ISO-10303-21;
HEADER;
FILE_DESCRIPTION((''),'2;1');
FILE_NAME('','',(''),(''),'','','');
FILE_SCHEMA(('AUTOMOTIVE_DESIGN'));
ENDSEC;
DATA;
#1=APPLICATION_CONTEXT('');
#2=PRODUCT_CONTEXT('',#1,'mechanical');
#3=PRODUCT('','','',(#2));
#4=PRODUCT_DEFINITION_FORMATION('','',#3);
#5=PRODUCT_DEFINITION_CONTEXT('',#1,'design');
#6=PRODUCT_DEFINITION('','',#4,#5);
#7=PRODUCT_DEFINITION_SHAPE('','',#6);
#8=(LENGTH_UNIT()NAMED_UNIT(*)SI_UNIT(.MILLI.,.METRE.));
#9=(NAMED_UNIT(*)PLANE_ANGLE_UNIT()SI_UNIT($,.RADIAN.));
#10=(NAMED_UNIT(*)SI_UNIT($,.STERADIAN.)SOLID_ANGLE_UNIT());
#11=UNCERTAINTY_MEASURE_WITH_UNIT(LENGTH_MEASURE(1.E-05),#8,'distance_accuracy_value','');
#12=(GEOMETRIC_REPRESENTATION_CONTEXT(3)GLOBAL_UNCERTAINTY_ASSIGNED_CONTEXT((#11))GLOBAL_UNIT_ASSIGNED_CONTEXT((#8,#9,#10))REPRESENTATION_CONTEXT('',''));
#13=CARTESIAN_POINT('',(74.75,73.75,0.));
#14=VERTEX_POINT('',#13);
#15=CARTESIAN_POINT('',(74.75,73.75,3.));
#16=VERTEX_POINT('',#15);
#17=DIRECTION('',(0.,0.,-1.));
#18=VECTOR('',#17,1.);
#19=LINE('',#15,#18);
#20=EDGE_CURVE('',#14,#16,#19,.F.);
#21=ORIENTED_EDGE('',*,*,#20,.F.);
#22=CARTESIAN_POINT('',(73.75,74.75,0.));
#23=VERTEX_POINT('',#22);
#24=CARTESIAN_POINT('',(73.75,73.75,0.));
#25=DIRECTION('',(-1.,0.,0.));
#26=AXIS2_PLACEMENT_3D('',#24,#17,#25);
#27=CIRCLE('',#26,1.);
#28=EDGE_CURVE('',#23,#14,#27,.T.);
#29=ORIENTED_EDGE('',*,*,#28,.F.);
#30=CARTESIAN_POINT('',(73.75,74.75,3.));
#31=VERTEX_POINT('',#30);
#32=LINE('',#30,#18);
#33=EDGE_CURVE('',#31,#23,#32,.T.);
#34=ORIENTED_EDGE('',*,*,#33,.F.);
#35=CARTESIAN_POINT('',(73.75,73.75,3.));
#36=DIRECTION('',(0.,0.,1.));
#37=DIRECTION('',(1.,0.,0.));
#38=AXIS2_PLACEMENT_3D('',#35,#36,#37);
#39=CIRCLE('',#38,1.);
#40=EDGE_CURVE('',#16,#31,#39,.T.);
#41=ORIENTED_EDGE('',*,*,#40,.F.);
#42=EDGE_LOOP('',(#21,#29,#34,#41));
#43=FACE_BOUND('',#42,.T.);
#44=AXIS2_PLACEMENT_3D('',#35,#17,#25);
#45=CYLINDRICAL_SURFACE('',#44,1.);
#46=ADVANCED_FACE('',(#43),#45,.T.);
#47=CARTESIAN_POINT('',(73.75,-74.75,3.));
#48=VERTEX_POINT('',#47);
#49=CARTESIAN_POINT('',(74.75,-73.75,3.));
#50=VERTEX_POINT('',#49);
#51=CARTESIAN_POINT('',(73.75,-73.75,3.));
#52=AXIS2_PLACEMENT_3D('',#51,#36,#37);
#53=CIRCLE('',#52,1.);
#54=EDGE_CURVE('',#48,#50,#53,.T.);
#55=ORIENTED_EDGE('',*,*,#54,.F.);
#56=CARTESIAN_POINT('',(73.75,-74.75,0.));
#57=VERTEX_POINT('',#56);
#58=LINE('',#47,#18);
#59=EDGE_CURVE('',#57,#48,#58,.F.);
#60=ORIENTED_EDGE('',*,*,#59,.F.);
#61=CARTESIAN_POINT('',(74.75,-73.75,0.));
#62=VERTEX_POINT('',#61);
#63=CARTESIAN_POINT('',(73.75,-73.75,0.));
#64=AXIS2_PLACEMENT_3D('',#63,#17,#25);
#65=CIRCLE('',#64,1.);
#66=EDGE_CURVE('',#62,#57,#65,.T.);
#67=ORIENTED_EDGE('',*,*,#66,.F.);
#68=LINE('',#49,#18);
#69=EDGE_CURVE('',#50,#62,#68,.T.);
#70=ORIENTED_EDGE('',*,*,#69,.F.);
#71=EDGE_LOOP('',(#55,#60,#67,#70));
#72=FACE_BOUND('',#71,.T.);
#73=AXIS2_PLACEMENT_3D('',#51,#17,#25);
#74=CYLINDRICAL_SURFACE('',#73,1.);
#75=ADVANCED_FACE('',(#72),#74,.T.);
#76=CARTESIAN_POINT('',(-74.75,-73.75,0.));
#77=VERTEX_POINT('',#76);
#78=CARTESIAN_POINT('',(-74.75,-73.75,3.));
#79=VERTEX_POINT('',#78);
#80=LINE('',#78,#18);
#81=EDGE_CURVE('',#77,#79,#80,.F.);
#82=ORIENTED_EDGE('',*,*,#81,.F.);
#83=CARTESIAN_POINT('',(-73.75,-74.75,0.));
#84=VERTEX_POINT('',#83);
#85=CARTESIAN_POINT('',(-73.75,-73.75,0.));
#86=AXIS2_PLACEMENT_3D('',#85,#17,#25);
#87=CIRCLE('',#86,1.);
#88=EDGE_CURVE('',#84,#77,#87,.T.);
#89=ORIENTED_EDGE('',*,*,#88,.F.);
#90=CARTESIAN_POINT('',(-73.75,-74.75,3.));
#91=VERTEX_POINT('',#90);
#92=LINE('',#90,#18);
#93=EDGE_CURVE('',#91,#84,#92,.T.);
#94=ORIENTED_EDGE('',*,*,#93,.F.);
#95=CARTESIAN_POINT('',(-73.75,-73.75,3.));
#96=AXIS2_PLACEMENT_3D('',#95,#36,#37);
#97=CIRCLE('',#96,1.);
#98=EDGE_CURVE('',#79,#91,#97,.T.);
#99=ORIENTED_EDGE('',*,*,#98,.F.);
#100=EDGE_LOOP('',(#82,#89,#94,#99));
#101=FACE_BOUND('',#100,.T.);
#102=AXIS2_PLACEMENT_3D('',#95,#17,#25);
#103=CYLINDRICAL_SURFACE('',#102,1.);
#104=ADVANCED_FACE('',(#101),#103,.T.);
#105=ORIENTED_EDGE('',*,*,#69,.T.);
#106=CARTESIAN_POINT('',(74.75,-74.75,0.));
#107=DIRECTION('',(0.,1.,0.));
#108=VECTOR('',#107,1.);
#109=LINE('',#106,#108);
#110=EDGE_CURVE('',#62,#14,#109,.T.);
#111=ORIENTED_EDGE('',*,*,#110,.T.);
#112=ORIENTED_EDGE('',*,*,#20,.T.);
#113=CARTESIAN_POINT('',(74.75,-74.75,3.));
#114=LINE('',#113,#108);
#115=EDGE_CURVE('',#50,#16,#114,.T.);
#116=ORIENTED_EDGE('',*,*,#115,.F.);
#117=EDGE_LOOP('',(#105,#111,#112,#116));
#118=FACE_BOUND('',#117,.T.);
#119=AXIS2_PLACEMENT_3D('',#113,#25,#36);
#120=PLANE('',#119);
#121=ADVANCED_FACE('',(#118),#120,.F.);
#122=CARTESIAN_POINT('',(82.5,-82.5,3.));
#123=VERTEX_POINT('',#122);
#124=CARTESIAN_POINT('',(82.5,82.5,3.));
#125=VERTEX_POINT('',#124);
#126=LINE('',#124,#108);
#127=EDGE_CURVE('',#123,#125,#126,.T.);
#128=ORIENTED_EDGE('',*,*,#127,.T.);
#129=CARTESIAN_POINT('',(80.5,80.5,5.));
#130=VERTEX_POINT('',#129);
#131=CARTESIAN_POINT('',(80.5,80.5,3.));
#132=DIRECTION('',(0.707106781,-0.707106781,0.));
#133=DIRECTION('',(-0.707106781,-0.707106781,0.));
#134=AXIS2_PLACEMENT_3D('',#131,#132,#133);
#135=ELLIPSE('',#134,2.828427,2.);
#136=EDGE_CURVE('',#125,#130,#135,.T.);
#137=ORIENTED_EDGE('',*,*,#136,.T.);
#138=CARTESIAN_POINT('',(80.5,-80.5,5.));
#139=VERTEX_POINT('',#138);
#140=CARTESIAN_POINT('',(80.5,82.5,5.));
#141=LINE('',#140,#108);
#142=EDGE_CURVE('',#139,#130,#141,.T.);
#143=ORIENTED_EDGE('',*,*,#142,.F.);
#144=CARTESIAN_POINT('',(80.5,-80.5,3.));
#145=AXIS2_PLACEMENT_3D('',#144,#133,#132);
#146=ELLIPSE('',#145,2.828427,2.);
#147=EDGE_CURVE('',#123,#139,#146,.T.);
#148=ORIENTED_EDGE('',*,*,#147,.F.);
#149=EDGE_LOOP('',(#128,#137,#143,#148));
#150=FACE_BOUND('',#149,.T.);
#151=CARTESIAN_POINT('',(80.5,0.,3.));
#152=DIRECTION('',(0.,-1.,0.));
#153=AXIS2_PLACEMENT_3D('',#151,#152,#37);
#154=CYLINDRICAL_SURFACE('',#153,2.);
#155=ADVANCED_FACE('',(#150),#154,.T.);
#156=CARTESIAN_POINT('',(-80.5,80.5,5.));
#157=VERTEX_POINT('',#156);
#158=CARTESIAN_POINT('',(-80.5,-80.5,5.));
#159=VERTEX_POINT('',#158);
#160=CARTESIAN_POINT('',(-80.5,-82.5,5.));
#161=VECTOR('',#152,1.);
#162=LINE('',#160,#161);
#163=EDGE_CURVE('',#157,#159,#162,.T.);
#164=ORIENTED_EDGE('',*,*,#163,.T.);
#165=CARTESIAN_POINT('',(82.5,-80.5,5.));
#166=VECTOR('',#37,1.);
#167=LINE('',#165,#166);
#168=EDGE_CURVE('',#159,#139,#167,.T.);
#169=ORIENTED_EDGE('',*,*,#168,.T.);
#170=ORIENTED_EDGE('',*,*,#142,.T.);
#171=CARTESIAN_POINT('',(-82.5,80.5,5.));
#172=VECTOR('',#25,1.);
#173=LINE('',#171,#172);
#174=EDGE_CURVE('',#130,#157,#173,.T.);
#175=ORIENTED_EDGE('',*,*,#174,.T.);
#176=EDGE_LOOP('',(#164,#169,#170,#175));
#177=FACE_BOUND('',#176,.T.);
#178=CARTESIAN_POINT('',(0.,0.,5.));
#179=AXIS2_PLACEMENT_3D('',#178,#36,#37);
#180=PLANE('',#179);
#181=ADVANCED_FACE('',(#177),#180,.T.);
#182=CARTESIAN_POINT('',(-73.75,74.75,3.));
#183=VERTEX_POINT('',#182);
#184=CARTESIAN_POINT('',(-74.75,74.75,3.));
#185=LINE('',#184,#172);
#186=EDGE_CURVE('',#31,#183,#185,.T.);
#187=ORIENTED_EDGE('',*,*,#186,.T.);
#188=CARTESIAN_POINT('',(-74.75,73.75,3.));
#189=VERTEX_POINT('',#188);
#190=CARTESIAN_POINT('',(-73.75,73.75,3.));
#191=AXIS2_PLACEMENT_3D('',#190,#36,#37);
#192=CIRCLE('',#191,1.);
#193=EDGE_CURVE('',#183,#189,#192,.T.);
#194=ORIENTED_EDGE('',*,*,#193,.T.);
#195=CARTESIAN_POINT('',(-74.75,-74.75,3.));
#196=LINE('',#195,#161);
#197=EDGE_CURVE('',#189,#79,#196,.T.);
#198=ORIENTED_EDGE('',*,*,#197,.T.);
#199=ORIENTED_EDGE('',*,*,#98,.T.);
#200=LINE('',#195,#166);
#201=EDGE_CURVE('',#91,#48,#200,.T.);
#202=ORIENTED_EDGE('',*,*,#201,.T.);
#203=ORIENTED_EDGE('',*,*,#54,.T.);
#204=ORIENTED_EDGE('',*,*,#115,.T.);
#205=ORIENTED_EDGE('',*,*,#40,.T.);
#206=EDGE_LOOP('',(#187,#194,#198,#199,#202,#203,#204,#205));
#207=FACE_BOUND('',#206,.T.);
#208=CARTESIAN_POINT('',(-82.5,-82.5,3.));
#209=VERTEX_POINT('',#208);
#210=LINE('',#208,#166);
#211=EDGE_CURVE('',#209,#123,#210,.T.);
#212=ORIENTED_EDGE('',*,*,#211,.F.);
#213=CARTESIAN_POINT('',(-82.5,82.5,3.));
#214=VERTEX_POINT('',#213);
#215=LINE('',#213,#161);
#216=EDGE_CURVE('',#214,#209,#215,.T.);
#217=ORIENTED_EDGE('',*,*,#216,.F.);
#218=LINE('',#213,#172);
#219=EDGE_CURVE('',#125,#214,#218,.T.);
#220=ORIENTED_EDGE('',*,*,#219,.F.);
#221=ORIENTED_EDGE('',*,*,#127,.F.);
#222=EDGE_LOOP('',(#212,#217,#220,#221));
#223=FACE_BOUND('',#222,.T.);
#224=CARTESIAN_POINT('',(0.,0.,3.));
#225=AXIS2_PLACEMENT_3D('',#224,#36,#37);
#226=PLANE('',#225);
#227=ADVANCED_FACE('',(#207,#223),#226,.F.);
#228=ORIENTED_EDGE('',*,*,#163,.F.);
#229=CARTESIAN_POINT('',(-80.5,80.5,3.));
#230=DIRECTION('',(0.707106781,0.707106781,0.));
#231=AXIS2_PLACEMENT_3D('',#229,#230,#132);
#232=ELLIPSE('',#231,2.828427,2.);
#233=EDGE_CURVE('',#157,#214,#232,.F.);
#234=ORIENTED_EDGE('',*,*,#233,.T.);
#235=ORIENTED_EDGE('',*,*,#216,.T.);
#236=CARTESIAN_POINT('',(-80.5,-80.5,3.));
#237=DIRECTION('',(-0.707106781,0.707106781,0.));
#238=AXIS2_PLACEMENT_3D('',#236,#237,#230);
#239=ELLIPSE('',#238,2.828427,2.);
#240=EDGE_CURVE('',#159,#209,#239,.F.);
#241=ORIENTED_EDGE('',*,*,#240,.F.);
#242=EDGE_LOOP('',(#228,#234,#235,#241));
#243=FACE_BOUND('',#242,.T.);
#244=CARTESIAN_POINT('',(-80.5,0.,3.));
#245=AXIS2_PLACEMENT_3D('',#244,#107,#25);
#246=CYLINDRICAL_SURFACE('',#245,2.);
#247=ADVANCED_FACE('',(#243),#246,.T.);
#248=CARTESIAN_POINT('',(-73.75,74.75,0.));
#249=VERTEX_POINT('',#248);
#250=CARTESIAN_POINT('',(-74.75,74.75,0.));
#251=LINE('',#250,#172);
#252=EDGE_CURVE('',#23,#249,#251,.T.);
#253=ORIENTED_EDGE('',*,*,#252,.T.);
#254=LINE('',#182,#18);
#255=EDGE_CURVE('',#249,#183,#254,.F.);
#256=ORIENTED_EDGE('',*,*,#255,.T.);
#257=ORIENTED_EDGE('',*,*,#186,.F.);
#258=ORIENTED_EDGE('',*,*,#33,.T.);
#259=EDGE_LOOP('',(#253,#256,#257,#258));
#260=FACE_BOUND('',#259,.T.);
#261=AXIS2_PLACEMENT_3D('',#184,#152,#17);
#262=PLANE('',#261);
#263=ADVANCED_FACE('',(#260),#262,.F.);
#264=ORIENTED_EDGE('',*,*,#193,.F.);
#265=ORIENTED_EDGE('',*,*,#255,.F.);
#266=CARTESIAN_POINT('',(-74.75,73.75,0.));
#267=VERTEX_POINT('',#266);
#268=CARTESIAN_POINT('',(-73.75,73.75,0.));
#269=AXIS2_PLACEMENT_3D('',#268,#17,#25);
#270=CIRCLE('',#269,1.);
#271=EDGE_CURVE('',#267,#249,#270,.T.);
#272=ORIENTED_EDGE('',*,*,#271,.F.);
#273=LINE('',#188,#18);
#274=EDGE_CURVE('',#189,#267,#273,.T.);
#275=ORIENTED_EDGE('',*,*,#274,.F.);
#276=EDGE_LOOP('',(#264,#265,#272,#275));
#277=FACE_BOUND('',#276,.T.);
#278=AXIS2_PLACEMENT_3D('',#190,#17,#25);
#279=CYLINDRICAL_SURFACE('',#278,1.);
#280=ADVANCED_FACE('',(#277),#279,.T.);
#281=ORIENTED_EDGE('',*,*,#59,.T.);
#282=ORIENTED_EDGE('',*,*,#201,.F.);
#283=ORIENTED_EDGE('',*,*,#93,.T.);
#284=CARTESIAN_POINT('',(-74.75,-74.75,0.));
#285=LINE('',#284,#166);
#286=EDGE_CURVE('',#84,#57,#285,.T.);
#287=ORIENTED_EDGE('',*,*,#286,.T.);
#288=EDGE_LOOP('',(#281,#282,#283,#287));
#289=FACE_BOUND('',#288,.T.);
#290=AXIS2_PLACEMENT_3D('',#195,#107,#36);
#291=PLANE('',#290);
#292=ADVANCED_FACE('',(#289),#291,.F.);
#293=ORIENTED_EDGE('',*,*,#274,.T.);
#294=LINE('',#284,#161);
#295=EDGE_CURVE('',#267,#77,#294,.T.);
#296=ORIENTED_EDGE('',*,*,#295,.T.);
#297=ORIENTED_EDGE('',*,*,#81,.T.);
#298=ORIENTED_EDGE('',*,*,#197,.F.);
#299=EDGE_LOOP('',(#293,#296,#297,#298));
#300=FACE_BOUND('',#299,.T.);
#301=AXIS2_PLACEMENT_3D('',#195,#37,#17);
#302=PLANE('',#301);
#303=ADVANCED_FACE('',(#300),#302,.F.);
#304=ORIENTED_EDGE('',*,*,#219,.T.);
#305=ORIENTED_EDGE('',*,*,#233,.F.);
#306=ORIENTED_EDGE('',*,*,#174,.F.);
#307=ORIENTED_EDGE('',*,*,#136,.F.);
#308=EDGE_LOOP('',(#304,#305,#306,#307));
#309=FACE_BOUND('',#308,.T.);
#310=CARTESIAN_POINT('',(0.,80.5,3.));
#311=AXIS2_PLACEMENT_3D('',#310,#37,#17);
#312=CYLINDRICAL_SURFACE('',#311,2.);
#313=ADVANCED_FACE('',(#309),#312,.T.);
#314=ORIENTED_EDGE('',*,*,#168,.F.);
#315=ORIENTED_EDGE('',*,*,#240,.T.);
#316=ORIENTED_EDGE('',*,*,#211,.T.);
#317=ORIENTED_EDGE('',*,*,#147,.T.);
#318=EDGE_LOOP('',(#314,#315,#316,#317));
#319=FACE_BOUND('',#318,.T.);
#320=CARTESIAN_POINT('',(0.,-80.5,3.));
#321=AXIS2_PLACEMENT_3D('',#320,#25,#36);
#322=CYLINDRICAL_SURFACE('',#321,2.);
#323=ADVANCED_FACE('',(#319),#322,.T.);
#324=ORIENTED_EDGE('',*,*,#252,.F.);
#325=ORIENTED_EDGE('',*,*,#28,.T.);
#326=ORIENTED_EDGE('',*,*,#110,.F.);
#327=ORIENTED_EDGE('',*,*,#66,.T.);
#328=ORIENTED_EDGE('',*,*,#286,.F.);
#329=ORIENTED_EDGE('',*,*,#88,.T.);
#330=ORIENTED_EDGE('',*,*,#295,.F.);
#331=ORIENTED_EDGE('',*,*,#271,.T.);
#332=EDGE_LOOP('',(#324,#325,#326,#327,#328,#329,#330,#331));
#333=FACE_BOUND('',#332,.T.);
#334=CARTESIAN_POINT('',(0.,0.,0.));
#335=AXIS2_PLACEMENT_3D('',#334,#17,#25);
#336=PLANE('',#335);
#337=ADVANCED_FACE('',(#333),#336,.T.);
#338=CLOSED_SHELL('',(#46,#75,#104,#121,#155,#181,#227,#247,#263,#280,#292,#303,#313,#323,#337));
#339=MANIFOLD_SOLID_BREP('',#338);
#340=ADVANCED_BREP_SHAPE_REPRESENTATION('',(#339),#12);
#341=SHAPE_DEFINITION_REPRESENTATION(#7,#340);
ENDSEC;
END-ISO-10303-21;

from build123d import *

# Parameters (mm, degrees)
SKETCH_1_W      = 149.5
SKETCH_1_H      = 149.5
EXTRUDE_1_DEPTH = 3
SKETCH_2_W      = 165
SKETCH_2_H      = 165
EXTRUDE_2_DEPTH = 2
FILLET_1_R      = 1
FILLET_2_R      = 2


with BuildPart() as part:
    # 草图1 → 凸台-拉伸1 (new body)
    with BuildSketch(Plane.XY):
        Rectangle(SKETCH_1_W, SKETCH_1_H)
    extrude(amount=EXTRUDE_1_DEPTH)

    # 草图2 → 凸台-拉伸2 (add)
    with BuildSketch(Plane.XY.offset(3)):
        Rectangle(SKETCH_2_W, SKETCH_2_H)
    extrude(amount=EXTRUDE_2_DEPTH)

    # 圆角1
    fillet_1_edges = [part.edges().sort_by_distance(p)[0] for p in [
        (74.75, -74.75, 1.5),
        (-74.75, -74.75, 1.5),
        (-74.75, 74.75, 1.5),
        (74.75, 74.75, 1.5),
    ]]
    fillet(fillet_1_edges, radius=FILLET_1_R)

    # 圆角2
    fillet_2_edges = [part.edges().sort_by_distance(p)[0] for p in [
        (0, -82.5, 5),
        (-82.5, 0, 5),
        (0, 82.5, 5),
        (82.5, 0, 5),
    ]]
    fillet(fillet_2_edges, radius=FILLET_2_R - 0.0001)  # a hair under: the kernel refuses the full size


solid = part.part
